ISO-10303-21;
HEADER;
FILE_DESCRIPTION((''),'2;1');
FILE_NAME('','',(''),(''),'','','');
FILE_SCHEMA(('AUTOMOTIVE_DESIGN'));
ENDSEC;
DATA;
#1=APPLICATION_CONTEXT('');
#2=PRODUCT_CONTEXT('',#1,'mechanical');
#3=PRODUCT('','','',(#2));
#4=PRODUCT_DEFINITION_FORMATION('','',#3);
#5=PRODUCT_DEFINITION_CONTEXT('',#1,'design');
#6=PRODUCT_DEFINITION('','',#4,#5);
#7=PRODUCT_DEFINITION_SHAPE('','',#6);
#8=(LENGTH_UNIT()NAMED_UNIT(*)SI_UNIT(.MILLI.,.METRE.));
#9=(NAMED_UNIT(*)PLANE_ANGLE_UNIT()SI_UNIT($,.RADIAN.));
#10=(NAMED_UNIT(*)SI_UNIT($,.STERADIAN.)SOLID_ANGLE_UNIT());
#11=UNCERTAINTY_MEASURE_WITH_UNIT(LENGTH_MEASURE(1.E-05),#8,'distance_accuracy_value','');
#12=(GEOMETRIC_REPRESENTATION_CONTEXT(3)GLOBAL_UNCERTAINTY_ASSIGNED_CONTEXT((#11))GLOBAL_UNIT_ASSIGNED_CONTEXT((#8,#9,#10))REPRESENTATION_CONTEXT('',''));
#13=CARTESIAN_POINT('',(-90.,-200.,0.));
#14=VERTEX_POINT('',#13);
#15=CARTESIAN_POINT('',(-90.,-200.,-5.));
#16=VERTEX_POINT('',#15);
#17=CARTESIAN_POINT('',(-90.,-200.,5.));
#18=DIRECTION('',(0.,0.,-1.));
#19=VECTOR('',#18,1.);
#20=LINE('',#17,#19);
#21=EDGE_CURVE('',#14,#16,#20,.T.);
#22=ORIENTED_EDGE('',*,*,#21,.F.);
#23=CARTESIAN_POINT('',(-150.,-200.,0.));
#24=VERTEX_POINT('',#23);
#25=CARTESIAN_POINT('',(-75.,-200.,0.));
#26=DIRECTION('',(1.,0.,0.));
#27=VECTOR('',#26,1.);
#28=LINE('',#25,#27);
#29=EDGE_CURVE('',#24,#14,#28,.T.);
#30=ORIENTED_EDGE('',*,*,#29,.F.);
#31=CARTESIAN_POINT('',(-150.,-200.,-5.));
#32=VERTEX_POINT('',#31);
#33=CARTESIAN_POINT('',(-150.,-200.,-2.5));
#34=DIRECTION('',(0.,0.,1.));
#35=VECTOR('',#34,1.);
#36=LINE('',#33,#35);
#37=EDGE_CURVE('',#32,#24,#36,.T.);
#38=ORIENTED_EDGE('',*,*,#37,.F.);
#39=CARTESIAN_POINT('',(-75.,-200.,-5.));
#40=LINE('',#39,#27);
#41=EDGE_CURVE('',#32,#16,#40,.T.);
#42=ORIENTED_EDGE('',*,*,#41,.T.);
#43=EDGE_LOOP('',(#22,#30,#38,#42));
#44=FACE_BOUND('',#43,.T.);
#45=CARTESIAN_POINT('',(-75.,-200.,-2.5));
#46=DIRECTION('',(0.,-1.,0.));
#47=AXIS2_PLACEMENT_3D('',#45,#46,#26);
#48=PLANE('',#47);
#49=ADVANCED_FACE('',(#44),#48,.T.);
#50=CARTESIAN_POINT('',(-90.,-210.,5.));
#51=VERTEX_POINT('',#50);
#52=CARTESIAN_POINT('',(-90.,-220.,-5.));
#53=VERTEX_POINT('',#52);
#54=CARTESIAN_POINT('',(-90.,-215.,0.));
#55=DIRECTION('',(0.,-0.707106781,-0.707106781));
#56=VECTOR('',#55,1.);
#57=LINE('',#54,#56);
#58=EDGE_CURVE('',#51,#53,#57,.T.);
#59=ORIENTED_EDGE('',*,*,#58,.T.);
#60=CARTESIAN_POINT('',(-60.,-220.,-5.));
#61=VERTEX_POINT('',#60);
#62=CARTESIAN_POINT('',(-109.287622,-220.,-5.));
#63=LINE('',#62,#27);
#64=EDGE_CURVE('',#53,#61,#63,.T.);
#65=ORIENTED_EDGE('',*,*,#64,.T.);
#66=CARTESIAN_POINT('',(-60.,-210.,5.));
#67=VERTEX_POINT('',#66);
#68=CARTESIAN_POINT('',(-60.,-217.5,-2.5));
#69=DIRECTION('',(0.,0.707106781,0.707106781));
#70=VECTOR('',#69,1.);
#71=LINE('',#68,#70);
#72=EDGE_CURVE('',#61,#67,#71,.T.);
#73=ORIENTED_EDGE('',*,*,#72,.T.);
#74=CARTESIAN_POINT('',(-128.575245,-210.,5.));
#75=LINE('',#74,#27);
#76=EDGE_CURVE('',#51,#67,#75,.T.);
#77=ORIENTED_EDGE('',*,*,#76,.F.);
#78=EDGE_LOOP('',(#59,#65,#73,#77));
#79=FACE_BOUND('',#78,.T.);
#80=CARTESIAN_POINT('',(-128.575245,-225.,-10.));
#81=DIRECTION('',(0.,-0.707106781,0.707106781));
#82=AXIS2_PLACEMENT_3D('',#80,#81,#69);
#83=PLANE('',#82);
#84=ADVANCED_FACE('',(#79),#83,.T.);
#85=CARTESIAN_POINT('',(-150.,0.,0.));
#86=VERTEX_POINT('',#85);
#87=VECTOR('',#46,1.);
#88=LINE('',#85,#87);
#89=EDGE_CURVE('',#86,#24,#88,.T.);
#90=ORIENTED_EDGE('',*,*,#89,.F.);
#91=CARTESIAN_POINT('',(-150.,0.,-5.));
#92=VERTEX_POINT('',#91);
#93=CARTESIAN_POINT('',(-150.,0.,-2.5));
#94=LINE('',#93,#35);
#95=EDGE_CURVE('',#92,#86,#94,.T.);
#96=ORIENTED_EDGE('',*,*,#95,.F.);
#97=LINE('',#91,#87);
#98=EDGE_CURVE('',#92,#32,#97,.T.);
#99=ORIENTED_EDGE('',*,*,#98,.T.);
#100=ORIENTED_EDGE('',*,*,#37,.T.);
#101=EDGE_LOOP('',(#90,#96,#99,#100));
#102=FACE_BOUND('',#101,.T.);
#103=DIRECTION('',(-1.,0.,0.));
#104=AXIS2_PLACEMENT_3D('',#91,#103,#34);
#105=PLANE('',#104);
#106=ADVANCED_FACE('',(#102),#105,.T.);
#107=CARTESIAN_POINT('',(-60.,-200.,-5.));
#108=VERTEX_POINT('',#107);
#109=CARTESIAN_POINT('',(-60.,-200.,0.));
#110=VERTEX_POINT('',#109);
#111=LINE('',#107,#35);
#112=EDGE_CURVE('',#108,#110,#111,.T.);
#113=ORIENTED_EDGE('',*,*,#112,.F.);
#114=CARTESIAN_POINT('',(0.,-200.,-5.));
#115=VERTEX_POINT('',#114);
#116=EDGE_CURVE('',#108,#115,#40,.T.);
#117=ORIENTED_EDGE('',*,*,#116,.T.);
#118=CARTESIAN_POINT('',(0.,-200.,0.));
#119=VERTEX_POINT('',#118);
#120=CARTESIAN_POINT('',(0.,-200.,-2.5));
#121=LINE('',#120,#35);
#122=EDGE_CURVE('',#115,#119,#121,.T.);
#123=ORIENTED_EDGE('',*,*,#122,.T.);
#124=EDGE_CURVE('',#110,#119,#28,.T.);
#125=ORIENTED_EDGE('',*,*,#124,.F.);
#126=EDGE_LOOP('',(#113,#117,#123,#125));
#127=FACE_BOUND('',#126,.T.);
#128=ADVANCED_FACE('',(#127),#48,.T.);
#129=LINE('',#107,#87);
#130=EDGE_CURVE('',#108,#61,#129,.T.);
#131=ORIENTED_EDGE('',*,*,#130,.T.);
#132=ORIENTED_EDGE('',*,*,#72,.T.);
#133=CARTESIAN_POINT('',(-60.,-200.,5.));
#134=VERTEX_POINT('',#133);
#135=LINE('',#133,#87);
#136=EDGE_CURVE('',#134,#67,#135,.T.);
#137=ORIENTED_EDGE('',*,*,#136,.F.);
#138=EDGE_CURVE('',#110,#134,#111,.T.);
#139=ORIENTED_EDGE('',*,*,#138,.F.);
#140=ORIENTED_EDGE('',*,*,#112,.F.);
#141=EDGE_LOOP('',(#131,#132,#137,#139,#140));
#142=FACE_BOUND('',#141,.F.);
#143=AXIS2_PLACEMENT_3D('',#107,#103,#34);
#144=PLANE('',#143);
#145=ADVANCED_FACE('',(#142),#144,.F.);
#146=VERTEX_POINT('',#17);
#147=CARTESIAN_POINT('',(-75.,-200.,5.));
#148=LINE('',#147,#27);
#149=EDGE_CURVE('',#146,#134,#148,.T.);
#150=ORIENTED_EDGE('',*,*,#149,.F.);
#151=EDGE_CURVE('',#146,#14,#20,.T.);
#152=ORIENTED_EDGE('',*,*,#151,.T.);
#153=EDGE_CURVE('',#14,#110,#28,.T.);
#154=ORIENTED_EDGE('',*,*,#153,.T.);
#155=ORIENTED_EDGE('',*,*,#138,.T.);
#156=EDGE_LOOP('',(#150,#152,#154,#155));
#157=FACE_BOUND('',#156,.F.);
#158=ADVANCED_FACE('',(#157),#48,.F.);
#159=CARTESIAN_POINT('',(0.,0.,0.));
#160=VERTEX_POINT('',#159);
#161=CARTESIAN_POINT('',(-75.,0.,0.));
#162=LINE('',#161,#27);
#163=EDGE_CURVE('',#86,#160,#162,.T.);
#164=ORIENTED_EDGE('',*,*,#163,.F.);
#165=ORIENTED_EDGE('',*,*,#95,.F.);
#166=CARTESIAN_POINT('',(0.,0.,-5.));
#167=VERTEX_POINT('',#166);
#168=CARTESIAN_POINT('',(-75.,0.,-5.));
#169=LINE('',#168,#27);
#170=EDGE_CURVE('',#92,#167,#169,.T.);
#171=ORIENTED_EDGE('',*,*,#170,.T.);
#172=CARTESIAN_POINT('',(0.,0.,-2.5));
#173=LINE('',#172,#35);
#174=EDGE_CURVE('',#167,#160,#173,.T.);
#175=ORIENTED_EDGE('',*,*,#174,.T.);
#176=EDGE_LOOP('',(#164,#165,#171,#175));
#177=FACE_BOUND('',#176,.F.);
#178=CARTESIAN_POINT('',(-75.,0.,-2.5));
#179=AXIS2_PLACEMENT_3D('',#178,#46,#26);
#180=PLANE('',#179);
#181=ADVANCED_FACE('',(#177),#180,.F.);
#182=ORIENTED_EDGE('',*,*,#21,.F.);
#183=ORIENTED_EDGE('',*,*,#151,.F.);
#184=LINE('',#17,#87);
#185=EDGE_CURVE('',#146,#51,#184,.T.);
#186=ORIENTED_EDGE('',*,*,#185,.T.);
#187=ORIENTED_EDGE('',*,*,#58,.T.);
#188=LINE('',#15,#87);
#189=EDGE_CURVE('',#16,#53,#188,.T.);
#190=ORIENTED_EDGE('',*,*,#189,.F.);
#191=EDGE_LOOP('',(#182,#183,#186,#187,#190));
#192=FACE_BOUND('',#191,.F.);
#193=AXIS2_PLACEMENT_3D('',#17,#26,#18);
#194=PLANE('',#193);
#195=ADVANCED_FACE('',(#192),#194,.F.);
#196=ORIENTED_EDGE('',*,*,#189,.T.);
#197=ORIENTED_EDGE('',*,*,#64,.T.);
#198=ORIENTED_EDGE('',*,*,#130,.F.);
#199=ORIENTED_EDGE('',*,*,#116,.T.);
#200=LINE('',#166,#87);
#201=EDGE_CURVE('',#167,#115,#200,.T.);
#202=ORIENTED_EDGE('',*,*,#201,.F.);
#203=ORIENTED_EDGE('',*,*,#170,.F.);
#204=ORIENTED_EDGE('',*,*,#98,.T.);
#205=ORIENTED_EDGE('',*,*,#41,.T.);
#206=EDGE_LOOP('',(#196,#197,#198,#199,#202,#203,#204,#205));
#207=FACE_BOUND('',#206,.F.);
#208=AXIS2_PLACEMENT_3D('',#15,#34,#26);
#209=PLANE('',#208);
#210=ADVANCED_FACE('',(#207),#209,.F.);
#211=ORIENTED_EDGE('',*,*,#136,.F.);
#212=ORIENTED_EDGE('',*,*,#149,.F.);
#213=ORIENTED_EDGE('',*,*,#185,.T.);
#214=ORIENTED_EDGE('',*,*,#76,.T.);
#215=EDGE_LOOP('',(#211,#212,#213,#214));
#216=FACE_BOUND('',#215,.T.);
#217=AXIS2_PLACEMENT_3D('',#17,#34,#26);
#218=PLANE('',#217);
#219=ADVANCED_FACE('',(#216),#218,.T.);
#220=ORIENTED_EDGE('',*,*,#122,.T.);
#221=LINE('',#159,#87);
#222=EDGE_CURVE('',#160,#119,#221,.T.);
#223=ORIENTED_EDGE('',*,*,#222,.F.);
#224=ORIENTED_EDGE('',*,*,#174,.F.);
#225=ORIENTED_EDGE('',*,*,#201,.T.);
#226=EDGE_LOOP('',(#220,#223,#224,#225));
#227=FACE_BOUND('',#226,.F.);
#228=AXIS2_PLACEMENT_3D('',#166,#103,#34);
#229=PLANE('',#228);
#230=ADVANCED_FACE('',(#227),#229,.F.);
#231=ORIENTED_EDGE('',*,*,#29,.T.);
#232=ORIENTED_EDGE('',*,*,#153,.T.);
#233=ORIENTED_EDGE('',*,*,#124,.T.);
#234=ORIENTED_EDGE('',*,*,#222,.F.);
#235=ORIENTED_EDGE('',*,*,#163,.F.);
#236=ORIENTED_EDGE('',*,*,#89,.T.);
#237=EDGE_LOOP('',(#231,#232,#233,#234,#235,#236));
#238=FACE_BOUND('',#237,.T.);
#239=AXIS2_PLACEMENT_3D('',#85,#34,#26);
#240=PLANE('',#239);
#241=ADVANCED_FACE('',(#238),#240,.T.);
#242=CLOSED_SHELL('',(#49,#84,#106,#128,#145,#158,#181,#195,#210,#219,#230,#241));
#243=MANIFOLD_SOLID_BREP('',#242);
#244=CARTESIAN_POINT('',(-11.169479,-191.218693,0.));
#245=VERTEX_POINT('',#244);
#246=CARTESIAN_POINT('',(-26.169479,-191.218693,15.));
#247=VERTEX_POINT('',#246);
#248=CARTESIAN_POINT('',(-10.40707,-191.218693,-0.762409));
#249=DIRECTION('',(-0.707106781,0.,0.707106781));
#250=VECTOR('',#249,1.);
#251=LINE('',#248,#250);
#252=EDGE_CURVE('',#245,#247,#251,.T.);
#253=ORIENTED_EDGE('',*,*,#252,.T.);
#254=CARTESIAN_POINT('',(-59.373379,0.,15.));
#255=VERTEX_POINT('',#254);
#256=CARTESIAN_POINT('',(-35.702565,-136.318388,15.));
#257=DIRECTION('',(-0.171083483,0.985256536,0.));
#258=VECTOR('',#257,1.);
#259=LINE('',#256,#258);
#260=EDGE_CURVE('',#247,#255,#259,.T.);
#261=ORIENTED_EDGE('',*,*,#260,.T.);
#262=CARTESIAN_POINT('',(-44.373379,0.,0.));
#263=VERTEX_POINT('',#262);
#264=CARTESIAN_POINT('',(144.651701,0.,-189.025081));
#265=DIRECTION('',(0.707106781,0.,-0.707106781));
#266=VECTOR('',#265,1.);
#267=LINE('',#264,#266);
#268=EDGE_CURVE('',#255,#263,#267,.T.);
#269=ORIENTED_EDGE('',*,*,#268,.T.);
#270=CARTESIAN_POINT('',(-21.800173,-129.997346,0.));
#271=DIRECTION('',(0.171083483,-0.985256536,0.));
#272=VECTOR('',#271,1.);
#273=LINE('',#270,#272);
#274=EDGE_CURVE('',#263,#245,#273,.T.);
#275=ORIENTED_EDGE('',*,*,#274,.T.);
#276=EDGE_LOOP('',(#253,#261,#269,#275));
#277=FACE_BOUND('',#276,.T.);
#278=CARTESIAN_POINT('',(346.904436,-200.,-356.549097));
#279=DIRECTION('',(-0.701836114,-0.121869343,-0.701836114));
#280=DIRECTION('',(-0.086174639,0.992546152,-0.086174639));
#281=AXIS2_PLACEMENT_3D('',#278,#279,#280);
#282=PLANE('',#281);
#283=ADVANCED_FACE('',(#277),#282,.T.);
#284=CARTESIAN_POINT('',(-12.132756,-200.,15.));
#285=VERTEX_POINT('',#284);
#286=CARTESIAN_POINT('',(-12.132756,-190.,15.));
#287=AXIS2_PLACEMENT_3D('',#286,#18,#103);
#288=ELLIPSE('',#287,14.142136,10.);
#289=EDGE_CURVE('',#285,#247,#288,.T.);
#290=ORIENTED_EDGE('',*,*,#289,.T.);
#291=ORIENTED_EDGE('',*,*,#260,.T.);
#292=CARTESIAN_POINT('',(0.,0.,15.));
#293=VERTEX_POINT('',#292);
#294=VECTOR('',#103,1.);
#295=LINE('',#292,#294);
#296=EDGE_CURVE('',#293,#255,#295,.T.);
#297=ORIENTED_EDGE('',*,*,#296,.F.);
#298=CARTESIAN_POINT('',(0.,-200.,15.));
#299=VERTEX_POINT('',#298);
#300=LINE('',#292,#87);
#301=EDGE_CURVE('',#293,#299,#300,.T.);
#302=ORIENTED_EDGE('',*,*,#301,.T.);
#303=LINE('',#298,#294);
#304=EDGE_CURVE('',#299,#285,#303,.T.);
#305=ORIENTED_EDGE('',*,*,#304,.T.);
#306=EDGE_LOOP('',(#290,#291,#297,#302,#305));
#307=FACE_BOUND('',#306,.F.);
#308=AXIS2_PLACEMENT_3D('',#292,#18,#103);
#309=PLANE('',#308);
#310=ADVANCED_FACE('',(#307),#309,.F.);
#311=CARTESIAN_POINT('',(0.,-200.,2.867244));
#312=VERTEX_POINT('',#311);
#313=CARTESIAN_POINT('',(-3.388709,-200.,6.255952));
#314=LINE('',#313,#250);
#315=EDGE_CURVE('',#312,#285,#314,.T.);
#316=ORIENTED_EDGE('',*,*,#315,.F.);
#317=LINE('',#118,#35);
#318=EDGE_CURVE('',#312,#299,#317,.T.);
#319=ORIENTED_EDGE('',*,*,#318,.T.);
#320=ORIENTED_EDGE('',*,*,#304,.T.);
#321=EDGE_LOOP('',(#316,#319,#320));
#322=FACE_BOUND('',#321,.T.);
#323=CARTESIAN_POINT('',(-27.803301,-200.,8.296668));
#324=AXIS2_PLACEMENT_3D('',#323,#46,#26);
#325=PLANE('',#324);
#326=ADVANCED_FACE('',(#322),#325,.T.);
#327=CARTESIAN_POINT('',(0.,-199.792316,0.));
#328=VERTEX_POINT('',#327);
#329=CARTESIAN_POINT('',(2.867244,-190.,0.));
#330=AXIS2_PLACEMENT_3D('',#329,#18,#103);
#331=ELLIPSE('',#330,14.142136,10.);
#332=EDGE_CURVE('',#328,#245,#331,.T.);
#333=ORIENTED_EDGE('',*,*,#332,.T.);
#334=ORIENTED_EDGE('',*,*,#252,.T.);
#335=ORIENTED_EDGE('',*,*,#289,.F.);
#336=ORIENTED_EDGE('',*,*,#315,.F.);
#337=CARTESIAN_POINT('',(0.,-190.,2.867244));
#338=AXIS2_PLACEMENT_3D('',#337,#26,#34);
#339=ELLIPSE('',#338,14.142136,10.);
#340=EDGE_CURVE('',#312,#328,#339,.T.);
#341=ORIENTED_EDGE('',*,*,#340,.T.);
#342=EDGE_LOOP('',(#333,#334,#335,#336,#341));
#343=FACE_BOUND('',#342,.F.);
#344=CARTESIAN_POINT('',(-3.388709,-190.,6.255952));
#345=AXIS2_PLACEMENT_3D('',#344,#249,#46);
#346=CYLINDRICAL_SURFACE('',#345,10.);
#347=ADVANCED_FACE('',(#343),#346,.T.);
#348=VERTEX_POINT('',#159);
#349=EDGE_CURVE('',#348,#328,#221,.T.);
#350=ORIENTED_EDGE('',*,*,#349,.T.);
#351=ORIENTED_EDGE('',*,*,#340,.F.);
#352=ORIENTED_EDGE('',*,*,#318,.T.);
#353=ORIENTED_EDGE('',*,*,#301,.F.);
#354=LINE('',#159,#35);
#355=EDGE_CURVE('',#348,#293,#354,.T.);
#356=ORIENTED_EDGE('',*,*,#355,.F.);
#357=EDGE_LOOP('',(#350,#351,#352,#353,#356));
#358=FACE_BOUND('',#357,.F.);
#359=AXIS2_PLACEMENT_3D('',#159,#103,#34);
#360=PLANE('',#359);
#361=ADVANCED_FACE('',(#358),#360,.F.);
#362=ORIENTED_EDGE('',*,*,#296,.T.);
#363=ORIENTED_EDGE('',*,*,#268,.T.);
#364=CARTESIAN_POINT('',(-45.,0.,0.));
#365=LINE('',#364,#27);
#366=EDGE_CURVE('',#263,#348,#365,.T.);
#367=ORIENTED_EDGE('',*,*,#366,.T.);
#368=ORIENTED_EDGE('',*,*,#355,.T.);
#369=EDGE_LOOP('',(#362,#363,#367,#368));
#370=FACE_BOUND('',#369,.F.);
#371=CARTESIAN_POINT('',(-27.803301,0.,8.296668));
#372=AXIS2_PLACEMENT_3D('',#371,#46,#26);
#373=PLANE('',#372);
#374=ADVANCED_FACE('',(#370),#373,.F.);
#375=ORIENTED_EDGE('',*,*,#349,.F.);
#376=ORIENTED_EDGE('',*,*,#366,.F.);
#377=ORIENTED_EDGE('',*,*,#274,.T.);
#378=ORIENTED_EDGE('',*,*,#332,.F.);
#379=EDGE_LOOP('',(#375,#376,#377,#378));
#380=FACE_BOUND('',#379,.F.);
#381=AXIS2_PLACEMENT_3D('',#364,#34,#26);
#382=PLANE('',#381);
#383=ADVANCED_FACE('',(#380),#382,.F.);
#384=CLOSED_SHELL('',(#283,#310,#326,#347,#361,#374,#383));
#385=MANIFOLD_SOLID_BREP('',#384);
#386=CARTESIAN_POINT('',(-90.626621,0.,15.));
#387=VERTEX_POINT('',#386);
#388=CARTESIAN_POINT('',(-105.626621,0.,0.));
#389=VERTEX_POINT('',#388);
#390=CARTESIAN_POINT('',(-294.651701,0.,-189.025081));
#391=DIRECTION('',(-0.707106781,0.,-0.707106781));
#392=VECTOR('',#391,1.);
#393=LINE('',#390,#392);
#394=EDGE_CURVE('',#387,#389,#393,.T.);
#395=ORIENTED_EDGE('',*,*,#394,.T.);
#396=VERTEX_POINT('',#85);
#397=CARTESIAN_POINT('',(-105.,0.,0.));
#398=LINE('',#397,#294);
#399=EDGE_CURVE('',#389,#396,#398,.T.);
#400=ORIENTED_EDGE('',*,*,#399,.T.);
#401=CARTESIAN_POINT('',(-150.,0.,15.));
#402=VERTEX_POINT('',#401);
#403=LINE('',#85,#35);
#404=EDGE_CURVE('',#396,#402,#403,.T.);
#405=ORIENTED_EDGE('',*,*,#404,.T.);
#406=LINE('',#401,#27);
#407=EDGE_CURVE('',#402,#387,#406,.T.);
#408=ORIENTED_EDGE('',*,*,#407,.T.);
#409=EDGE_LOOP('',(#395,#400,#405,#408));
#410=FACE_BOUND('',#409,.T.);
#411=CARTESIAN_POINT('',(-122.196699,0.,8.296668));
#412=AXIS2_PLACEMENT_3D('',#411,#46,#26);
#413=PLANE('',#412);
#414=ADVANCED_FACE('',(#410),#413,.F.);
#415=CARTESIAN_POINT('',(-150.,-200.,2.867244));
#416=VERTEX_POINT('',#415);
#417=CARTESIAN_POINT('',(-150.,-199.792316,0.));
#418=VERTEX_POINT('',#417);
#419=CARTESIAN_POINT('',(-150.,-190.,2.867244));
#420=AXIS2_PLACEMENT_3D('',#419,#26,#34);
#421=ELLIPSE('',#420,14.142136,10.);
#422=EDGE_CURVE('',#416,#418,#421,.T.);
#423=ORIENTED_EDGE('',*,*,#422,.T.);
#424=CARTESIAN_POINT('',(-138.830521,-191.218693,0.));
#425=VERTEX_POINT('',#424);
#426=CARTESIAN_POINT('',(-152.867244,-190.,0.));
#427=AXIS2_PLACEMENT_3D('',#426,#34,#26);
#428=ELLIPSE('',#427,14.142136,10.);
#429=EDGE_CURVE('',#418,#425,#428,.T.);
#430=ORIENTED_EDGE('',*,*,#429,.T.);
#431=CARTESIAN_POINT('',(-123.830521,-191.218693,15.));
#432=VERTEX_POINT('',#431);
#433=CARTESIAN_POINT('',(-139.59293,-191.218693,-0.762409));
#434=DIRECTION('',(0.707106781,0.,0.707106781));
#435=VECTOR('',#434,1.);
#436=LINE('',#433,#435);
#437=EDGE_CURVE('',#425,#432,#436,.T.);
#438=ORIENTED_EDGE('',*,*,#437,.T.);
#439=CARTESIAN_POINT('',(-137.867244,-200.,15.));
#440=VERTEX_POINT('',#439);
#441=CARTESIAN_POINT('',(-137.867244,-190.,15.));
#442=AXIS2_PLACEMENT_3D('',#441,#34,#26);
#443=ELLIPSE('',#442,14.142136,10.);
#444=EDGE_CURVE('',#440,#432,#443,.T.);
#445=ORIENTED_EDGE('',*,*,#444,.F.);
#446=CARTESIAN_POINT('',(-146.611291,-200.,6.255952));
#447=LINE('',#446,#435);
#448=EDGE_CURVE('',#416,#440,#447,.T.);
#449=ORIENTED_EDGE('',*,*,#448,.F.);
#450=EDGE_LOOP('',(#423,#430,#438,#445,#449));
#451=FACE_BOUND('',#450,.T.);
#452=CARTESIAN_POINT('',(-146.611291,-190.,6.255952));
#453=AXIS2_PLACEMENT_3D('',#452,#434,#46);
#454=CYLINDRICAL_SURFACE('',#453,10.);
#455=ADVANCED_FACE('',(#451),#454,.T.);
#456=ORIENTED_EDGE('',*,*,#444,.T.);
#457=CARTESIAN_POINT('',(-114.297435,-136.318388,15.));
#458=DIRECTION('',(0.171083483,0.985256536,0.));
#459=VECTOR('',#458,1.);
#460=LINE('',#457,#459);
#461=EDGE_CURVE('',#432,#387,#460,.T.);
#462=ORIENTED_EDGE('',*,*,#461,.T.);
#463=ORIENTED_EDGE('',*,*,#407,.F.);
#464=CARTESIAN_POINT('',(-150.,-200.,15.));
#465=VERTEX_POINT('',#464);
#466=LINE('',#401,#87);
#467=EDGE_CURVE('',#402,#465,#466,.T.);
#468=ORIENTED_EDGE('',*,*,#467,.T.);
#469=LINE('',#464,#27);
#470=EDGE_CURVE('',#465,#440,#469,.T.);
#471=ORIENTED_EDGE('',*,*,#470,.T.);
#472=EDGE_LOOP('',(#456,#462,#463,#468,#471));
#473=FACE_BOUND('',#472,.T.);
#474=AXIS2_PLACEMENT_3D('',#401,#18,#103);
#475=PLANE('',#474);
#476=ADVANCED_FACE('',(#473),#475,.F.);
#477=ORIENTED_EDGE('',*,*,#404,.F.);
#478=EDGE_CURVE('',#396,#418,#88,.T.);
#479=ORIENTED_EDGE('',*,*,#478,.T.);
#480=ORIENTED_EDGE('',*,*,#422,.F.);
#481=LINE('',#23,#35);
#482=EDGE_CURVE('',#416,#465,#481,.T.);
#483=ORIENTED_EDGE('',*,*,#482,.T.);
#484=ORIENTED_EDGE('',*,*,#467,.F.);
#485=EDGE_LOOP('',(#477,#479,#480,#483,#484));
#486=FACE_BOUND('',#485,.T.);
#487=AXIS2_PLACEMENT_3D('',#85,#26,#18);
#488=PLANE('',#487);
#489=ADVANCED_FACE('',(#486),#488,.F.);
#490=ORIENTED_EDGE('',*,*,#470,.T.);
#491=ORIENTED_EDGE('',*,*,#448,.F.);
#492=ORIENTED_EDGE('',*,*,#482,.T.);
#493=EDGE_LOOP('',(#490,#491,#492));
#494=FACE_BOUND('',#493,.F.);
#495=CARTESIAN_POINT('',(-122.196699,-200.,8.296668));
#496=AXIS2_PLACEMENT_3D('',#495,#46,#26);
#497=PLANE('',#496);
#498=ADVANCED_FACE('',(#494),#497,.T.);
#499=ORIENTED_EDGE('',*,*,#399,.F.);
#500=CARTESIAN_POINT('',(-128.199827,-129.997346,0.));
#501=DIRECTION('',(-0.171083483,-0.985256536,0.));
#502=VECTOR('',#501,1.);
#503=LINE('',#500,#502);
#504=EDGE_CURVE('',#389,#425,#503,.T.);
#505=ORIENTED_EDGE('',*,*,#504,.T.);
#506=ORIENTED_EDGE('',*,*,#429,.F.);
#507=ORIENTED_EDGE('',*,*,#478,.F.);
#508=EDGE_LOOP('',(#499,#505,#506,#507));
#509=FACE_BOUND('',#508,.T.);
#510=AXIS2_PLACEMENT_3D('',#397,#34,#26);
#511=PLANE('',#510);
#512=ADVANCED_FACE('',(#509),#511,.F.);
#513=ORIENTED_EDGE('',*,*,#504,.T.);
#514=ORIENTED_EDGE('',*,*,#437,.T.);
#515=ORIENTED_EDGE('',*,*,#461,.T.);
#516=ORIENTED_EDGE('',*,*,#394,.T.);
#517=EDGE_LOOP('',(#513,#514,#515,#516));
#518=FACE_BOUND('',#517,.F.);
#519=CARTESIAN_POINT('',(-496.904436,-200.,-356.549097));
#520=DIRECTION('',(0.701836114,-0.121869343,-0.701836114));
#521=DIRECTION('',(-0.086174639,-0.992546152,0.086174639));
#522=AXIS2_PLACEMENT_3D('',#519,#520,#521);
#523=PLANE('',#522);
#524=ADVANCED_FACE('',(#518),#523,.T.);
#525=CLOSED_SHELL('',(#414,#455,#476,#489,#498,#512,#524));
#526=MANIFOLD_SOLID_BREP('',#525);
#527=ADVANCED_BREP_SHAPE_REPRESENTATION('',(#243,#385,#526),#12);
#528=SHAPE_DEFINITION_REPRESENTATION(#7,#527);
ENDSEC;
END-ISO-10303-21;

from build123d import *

# Parameters (mm, degrees)
F1_DEPTH     = 200
F2_T1_DEPTH  = 1079.6863395878
F3_R         = 10
F4_W         = 150
F4_H         = 5
F5_DEPTH     = 200
F8_W         = 30
F8_H         = 5
F9_DEPTH     = 25
F10_T1_DEPTH = 107.150489639


# Not quite as in the source:
# - a fillet or chamfer that OpenCascade refuses, or shapes differently, is made with other operations: its cross-section is extruded or revolved along the edge and cut away or added
# - a feature names something its author has since deleted; it is built from what else it names


with BuildPart() as f1:
    # F0 (on Front) → F1 (new body)
    with BuildSketch(Plane.XZ):
        Polygon((-45, 0), (0, 0), (0, 15), (-60, 15), (-52.5, 7.5), align=None)
    extrude(amount=F1_DEPTH)

    # F2: chamfer of 25 x 203.6086606994 on 1 edges, made by hand

    # F2_s2 → F2_t1 (cut)
    with BuildSketch(Plane(origin=(351.7267661385, 0, -351.7267661385), x_dir=(0, 1, 0), z_dir=(-0.7071067812, 0, 0.7071067812))):
        Polygon((-200, 6.8198051534), (3.6086606994, 31.8198051534), (-200, 31.8198051534), align=None)
    extrude(amount=F2_T1_DEPTH, mode=Mode.SUBTRACT)

    # F3
    f3_edges = [f1.edges().sort_by_distance(p)[0] for p in [
        (-17.144661, -200, 7.5),
    ]]
    fillet(f3_edges, radius=F3_R)


with BuildPart() as f5:
    # F4 (on Front) → F5 (new body)
    with BuildSketch(Plane.XZ):
        with Locations((-75, -2.5)):
            Rectangle(F4_W, F4_H)
    extrude(amount=F5_DEPTH)

    # F8 (on face) → F9 (join)
    with BuildSketch(Plane.XZ.offset(200)):
        with Locations((-75, -2.5)):
            Rectangle(F8_W, F8_H)
        with Locations((-75, 2.5)):
            Rectangle(F8_W, F8_H)
    extrude(amount=F9_DEPTH)

    # F10: chamfer of 15 on 1 edges, made by hand

    # F10_s2 → F10_t1 (cut)
    with BuildSketch(Plane.YZ.offset(-128.5752448195)):
        Polygon((-225, -10), (-210, 5), (-225, 5), align=None)
    extrude(amount=F10_T1_DEPTH, mode=Mode.SUBTRACT)


with BuildPart() as f7_1:
    # F7: instance of F1
    add(f1.part.mirror(Plane.YZ.offset(-75)))


solid = Compound([f1.part, f5.part, f7_1.part])
